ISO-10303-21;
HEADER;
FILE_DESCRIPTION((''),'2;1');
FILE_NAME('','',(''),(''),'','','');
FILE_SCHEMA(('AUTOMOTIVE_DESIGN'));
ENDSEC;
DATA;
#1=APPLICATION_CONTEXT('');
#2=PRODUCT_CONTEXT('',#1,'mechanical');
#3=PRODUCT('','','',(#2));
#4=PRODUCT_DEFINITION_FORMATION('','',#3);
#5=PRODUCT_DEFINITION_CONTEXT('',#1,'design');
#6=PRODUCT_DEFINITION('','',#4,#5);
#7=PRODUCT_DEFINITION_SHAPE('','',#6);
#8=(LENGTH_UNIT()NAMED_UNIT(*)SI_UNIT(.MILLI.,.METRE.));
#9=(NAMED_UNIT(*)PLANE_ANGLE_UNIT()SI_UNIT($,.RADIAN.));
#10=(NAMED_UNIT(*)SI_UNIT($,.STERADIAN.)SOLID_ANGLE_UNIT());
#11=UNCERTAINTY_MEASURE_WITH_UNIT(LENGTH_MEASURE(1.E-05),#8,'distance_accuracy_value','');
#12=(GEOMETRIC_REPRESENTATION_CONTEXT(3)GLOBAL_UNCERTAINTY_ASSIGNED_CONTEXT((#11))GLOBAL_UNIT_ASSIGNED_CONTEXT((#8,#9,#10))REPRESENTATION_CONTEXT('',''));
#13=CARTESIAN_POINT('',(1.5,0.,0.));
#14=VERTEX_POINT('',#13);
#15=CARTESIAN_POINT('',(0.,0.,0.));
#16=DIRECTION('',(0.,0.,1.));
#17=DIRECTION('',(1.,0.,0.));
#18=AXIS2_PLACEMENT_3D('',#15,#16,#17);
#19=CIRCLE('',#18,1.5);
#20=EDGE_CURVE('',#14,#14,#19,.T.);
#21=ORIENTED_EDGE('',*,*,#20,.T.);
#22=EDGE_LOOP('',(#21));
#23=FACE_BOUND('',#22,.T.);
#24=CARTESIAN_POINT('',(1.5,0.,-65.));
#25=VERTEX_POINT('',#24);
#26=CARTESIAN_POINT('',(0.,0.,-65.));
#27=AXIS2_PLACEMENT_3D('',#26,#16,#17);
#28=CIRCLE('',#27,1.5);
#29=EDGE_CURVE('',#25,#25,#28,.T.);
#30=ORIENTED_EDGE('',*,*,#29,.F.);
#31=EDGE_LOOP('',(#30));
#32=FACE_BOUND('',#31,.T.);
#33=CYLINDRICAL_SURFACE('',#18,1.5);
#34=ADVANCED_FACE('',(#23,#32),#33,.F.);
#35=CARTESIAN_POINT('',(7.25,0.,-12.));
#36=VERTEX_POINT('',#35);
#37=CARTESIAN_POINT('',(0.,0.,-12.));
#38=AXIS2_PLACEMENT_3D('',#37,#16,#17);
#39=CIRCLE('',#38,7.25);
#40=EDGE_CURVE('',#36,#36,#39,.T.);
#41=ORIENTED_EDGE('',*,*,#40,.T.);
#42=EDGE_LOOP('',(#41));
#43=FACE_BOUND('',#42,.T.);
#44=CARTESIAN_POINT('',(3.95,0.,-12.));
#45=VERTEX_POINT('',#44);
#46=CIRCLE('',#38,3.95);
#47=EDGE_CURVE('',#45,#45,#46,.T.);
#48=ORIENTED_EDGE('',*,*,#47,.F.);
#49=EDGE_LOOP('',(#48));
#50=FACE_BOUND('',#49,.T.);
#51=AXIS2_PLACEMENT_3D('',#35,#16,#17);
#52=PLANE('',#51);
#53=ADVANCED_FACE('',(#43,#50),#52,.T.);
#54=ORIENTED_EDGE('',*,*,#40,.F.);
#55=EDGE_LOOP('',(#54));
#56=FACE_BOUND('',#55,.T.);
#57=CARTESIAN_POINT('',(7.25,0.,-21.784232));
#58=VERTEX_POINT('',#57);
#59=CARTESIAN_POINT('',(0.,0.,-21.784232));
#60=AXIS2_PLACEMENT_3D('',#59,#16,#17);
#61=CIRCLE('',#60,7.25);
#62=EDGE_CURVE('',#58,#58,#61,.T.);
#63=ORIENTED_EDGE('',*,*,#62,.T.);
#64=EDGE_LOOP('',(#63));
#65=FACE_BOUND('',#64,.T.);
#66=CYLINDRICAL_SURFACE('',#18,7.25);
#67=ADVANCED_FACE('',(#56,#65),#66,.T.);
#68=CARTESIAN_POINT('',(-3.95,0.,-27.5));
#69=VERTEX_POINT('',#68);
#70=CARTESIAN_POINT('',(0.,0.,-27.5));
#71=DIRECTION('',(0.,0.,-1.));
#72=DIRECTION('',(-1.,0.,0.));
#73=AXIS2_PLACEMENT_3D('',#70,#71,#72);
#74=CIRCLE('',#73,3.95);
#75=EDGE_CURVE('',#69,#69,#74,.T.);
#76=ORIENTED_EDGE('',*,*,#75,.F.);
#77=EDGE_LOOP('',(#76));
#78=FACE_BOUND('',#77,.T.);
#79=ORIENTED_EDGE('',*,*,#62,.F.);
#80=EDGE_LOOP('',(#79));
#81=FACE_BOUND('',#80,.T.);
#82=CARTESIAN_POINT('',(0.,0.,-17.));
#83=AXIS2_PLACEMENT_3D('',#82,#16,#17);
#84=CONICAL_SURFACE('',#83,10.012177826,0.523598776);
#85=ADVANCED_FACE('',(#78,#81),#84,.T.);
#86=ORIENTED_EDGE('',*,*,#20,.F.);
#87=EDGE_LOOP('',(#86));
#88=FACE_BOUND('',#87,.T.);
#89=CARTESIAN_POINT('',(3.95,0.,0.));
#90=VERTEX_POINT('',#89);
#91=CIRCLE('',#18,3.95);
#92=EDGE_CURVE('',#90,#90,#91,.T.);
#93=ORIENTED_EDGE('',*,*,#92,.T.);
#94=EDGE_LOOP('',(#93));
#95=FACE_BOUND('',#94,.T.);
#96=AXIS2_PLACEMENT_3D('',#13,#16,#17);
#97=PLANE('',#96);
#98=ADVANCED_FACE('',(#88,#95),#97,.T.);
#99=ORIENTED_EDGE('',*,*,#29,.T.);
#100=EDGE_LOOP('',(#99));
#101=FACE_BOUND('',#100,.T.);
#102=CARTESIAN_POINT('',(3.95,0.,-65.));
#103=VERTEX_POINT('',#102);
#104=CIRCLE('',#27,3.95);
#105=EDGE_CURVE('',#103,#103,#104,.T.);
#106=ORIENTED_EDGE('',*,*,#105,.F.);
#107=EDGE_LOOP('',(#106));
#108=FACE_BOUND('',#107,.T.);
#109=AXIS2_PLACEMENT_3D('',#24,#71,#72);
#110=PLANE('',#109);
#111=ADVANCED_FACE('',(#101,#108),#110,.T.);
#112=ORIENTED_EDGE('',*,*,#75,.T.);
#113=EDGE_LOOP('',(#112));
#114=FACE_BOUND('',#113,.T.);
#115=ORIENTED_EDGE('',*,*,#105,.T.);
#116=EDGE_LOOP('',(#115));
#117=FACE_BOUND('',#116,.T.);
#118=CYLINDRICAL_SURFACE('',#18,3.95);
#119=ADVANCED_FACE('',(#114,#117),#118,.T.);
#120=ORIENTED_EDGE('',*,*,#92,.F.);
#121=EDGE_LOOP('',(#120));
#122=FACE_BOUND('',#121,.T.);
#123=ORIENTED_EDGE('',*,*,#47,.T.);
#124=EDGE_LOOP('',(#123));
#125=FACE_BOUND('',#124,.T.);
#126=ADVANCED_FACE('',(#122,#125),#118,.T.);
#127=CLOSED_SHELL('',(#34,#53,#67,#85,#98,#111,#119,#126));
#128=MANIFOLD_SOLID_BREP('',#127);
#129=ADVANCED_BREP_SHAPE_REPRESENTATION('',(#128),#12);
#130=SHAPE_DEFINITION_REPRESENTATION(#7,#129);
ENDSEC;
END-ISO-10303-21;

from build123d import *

# Parameters (mm, degrees)
CHAMFER1_SIZE   = 6.062177826
CHAMFER1_SIZE_2 = 10.5


with BuildPart() as part:
    # Sketch2 → Revolve1 (revolve)
    with BuildSketch(Plane(origin=(0, 0, 0), x_dir=(1, 0, 0), z_dir=(0, 1, 0))):
        Polygon((1.5, 0), (3.95, 0), (3.95, 12), (7.25, 12), (7.25, 17), (3.95, 17), (3.95, 65), (1.5, 65), align=None)
    revolve(axis=Axis((0, 0, 0), (0, 0, -1)))

    # Chamfer1
    # the kernel refuses this chamfer: 10.5, 6.062177826 mm, written as the material it adds along each edge
    with BuildSketch(Plane(origin=(0, 0, -17), x_dir=(1, 0, 0), z_dir=(0, 1, 0))) as chamfer1_piece_1_section:
        Polygon((3.95 + CHAMFER1_SIZE, 0), (3.95, CHAMFER1_SIZE_2), (3.95, 0), align=None)
    chamfer1_piece_1 = revolve(axis=Axis((0, 0, -17), (0, 0, -1)), mode=Mode.PRIVATE)
    chamfer1_piece_1 = chamfer1_piece_1 & Plane(origin=(0, 0, -24.775013255), x_dir=(1, 0, 0), z_dir=(0, 0, -1)) * Cylinder(7.25, 42, mode=Mode.PRIVATE)
    add(chamfer1_piece_1)


solid = part.part
